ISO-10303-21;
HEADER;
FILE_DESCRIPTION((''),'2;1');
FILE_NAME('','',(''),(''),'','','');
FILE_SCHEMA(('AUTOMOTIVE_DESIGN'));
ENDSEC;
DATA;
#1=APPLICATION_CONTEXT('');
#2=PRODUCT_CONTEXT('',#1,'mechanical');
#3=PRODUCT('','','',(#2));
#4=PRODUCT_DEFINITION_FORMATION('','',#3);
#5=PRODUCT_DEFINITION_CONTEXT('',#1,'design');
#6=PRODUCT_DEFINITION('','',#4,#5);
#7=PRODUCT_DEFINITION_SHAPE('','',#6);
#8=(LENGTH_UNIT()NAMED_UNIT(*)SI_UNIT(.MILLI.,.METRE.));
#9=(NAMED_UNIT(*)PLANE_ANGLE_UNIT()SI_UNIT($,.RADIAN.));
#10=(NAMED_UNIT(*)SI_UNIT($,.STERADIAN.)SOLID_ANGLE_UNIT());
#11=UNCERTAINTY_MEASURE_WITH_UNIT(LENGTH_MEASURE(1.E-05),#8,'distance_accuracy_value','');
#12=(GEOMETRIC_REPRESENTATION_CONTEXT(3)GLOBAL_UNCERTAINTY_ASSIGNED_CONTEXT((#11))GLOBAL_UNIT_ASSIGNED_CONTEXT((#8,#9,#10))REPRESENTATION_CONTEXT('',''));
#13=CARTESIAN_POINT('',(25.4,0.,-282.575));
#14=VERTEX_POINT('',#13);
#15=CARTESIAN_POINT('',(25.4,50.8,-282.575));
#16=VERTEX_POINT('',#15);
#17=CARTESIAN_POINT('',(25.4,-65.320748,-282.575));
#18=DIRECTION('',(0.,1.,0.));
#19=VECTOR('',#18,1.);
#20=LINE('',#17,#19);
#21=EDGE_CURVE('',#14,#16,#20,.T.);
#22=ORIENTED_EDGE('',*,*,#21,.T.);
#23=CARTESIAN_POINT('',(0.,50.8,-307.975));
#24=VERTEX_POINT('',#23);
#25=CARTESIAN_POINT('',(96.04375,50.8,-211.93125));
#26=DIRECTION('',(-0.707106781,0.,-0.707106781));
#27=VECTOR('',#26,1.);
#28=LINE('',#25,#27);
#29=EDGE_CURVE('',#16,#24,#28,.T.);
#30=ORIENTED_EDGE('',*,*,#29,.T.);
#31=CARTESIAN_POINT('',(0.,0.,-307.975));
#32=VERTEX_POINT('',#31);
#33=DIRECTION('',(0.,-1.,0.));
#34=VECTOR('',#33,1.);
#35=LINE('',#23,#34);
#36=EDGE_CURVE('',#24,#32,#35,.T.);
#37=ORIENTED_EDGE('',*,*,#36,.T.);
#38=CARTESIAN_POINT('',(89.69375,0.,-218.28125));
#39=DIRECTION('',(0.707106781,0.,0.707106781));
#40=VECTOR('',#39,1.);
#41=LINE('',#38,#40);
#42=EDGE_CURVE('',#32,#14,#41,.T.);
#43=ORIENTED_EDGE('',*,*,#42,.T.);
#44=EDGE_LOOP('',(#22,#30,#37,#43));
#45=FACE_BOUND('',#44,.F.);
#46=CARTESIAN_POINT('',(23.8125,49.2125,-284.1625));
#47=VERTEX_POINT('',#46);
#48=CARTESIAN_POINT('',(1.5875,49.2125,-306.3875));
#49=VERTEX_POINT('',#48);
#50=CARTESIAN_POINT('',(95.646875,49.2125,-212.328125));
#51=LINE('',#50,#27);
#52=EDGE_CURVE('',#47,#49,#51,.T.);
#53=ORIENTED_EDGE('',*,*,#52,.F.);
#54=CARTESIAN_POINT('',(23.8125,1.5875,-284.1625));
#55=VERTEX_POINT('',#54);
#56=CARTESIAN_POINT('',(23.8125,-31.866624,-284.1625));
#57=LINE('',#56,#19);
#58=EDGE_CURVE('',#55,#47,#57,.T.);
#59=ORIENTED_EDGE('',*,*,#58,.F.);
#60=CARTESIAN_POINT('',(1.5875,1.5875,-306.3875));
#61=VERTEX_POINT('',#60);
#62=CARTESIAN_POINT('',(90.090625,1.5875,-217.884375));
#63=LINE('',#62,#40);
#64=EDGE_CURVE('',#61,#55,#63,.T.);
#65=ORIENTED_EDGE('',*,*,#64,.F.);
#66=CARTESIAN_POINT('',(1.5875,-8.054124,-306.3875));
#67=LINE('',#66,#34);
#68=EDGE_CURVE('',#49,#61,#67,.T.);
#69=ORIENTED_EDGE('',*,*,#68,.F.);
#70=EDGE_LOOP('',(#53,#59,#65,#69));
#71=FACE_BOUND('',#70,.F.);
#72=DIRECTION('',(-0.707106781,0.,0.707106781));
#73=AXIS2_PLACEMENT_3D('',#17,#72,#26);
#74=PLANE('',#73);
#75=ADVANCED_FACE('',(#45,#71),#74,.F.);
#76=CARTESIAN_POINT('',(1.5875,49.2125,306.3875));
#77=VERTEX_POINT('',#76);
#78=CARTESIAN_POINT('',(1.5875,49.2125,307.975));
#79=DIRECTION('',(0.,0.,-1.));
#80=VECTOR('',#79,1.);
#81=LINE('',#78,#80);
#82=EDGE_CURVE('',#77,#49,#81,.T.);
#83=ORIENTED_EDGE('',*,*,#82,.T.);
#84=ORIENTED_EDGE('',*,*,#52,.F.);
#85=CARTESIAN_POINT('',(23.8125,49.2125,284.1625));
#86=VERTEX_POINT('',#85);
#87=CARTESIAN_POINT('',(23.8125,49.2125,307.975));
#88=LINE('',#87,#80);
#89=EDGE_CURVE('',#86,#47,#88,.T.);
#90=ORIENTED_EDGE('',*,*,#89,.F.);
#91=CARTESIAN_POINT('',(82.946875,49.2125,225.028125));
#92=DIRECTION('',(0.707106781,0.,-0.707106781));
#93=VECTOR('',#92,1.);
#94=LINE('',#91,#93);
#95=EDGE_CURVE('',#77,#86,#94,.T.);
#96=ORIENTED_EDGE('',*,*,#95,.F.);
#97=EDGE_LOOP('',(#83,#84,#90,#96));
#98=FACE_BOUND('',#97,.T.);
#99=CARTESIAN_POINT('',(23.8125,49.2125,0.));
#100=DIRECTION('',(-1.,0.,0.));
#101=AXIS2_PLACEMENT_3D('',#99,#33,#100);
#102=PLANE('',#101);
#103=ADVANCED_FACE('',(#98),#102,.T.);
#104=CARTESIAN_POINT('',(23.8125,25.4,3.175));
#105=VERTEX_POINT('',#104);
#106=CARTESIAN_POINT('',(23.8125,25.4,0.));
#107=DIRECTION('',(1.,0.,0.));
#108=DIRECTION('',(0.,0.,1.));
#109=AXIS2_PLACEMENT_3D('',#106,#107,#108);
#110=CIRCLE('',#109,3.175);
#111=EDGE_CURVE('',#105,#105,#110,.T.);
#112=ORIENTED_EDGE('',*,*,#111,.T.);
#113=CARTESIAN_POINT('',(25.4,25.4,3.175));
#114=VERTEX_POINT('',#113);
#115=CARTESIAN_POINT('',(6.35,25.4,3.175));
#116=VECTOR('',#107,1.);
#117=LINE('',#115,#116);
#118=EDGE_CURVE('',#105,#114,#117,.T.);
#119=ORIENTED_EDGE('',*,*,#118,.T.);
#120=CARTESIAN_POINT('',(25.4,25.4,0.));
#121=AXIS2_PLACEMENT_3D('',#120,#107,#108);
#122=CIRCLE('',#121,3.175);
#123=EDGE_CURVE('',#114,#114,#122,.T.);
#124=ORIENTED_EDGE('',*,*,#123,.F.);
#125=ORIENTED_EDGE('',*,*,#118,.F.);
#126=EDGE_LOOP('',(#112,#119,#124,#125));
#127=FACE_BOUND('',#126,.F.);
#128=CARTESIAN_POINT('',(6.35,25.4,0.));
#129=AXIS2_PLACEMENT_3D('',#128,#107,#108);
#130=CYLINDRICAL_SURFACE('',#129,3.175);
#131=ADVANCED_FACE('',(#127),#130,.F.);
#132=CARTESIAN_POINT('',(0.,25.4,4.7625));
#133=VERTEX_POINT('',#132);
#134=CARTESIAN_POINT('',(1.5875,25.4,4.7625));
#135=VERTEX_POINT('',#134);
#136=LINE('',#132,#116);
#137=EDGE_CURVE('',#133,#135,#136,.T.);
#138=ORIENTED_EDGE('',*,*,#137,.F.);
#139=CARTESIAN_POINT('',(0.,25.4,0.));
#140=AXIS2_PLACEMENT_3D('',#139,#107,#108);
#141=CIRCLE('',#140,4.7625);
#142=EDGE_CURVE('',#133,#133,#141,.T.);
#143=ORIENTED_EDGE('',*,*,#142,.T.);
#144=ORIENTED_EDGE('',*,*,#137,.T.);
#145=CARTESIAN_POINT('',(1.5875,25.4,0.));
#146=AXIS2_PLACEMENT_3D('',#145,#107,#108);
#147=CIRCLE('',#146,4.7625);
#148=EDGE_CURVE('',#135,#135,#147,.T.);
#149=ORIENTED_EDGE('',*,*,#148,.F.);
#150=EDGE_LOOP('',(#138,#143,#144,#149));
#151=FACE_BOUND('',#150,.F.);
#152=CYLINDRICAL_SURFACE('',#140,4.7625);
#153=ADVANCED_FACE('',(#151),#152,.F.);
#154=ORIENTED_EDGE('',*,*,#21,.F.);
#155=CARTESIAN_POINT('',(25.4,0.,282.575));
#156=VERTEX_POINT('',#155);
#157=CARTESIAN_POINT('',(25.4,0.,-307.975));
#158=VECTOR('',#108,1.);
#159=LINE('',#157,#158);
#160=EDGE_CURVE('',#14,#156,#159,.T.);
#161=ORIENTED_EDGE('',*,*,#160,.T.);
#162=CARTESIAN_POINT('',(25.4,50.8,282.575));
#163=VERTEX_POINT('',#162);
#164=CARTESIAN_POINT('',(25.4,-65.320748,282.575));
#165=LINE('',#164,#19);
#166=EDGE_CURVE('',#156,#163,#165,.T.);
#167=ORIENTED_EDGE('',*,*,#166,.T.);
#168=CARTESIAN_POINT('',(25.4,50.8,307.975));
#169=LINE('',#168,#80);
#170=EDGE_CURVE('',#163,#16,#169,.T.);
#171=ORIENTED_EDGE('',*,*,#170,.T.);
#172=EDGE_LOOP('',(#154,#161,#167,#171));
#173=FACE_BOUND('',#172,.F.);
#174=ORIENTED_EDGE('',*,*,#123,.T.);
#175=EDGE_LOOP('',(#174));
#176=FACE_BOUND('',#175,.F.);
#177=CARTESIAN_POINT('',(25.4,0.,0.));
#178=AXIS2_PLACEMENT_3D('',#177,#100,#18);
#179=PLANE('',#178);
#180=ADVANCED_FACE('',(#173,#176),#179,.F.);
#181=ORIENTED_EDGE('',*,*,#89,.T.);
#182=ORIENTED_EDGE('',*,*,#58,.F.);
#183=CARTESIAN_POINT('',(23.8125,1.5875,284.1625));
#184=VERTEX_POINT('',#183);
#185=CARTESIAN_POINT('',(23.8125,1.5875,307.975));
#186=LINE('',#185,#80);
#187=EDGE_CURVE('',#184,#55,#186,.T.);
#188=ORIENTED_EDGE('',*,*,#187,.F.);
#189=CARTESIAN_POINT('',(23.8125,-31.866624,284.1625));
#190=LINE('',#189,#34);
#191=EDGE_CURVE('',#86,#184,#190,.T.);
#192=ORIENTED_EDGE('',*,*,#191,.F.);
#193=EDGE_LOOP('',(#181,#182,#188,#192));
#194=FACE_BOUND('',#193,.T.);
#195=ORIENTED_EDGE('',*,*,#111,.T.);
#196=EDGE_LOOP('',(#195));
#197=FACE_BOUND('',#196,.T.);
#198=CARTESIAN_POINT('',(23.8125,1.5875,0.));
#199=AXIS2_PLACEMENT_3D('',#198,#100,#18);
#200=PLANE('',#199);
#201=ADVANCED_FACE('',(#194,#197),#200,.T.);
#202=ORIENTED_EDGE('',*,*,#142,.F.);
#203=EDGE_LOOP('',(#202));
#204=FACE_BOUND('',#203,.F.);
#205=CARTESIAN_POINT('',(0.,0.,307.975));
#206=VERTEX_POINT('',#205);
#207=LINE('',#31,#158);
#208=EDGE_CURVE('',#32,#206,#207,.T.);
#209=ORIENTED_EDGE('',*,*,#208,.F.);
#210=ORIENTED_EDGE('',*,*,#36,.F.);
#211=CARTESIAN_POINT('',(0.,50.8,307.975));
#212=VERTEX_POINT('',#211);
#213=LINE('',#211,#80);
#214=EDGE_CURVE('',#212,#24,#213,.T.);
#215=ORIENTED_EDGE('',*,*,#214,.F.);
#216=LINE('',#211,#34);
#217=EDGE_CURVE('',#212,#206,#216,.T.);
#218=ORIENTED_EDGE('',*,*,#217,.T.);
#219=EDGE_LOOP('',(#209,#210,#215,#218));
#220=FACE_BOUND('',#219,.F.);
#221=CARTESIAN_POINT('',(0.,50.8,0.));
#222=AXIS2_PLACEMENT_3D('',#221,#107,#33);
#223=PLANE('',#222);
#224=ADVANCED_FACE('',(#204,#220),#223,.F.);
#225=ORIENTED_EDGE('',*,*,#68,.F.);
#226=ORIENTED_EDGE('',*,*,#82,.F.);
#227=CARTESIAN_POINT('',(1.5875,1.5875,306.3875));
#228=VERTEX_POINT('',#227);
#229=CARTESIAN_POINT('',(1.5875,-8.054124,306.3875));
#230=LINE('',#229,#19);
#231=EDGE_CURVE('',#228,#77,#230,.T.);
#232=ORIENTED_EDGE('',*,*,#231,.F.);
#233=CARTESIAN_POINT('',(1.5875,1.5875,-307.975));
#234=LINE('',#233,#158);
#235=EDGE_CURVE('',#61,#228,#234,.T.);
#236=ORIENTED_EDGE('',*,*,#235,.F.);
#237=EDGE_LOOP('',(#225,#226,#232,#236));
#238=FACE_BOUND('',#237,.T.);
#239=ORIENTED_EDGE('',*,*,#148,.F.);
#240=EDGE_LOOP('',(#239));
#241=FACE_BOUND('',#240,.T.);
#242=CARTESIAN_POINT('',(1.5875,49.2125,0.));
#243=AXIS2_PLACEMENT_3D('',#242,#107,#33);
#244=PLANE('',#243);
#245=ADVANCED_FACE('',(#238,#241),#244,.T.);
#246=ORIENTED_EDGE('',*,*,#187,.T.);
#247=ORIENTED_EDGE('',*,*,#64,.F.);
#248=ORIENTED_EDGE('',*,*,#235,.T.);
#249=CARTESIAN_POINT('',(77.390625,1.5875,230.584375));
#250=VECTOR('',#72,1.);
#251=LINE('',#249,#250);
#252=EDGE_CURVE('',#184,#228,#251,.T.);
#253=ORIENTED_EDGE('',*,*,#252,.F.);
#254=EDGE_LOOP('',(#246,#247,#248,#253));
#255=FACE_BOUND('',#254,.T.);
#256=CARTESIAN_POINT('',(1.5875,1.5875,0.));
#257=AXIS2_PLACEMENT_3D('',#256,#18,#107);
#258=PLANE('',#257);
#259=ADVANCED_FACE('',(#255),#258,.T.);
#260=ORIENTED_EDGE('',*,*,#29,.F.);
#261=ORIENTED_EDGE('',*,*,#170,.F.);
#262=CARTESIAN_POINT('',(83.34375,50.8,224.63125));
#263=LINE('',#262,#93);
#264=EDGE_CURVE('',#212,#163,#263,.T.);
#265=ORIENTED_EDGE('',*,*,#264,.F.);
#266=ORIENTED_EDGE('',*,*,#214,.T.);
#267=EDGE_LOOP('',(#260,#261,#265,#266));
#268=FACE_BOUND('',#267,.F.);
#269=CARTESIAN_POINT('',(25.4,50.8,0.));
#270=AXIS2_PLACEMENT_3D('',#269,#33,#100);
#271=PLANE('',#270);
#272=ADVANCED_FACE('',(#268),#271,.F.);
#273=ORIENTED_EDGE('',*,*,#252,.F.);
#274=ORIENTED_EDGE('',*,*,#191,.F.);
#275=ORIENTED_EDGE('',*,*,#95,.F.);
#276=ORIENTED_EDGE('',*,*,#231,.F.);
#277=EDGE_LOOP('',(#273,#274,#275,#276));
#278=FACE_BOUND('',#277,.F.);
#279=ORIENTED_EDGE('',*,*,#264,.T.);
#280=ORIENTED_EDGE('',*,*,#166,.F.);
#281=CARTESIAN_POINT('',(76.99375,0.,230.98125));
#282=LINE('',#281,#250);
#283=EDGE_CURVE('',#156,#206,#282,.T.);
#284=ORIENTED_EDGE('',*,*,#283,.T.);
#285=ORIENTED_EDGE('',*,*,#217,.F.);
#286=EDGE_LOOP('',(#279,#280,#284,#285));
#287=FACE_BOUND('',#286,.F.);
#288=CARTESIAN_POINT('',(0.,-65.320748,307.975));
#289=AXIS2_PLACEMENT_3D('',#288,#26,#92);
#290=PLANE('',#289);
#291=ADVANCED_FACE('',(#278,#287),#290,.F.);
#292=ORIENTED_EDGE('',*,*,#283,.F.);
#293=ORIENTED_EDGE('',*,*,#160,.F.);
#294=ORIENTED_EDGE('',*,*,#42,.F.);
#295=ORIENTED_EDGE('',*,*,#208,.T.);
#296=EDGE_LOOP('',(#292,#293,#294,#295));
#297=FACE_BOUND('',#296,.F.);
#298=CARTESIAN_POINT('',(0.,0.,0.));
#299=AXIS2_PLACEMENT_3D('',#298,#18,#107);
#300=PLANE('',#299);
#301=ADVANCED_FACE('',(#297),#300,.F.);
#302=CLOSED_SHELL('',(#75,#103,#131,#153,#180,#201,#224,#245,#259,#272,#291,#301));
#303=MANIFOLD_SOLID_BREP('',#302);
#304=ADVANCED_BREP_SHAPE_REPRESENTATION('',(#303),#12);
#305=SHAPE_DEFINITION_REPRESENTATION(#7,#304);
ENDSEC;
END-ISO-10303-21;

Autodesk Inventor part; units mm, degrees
ref_plane "YZ Plane" through (0, 0, 0) normal (1, 0, 0) x (0, 1, 0)
ref_plane "XZ Plane" through (0, 0, 0) normal (0, 1, 0) x (-1, 0, 0)
ref_plane "XY Plane" through (0, 0, 0) normal (0, 0, 1) x (1, 0, 0)
sketch "Sketch1" plane through (0, 0, 0) normal (0, 0, 1) x (1, 0, 0)
  line L0 (0, 0) -> (25.4, 0)
  line L1 (25.4, 0) -> (25.4, 50.8)
  line L2 (25.4, 50.8) -> (0, 50.8)
  line L3 (0, 50.8) -> (0, 0)
  line L4 (1.5875, 1.5875) -> (23.8125, 1.5875)
  line L5 (23.8125, 1.5875) -> (23.8125, 49.2125)
  line L6 (23.8125, 49.2125) -> (1.5875, 49.2125)
  line L7 (1.5875, 49.2125) -> (1.5875, 1.5875)
  dimension "d0" = 25.4
  dimension "d1" = 50.8
  dimension "d2" = 1.5875
extrude "Extrusion1" add sketch "Sketch1" along normal mid plane 615.95
chamfer "Chamfer1" distance 25.4 angle 45 2 edges at (25.4, 25.4, 307.975) (25.4, 25.4, -307.975)
sketch "Sketch2" plane through (0, 0, 307.975) normal (-1, 0, 0) x (0, 0, 1)
  line L0 (-615.95, 0) -> (-615.95, 50.8) projected
  point P0 (-307.975, 0)
  point P1 (-307.975, 25.4)
  dimension "d8" = 25.4
  dimension "d9" = 307.975
hole "Hole1" at (0, 25.4, 0) direction (1, 0, 0) diameter 6.35 depth 25.4 tip angle 118 counterbore diameter 9.525 counterbore depth 6.35
properties part number "FRA_BackMainRail_002" material "Aluminum 6061"
